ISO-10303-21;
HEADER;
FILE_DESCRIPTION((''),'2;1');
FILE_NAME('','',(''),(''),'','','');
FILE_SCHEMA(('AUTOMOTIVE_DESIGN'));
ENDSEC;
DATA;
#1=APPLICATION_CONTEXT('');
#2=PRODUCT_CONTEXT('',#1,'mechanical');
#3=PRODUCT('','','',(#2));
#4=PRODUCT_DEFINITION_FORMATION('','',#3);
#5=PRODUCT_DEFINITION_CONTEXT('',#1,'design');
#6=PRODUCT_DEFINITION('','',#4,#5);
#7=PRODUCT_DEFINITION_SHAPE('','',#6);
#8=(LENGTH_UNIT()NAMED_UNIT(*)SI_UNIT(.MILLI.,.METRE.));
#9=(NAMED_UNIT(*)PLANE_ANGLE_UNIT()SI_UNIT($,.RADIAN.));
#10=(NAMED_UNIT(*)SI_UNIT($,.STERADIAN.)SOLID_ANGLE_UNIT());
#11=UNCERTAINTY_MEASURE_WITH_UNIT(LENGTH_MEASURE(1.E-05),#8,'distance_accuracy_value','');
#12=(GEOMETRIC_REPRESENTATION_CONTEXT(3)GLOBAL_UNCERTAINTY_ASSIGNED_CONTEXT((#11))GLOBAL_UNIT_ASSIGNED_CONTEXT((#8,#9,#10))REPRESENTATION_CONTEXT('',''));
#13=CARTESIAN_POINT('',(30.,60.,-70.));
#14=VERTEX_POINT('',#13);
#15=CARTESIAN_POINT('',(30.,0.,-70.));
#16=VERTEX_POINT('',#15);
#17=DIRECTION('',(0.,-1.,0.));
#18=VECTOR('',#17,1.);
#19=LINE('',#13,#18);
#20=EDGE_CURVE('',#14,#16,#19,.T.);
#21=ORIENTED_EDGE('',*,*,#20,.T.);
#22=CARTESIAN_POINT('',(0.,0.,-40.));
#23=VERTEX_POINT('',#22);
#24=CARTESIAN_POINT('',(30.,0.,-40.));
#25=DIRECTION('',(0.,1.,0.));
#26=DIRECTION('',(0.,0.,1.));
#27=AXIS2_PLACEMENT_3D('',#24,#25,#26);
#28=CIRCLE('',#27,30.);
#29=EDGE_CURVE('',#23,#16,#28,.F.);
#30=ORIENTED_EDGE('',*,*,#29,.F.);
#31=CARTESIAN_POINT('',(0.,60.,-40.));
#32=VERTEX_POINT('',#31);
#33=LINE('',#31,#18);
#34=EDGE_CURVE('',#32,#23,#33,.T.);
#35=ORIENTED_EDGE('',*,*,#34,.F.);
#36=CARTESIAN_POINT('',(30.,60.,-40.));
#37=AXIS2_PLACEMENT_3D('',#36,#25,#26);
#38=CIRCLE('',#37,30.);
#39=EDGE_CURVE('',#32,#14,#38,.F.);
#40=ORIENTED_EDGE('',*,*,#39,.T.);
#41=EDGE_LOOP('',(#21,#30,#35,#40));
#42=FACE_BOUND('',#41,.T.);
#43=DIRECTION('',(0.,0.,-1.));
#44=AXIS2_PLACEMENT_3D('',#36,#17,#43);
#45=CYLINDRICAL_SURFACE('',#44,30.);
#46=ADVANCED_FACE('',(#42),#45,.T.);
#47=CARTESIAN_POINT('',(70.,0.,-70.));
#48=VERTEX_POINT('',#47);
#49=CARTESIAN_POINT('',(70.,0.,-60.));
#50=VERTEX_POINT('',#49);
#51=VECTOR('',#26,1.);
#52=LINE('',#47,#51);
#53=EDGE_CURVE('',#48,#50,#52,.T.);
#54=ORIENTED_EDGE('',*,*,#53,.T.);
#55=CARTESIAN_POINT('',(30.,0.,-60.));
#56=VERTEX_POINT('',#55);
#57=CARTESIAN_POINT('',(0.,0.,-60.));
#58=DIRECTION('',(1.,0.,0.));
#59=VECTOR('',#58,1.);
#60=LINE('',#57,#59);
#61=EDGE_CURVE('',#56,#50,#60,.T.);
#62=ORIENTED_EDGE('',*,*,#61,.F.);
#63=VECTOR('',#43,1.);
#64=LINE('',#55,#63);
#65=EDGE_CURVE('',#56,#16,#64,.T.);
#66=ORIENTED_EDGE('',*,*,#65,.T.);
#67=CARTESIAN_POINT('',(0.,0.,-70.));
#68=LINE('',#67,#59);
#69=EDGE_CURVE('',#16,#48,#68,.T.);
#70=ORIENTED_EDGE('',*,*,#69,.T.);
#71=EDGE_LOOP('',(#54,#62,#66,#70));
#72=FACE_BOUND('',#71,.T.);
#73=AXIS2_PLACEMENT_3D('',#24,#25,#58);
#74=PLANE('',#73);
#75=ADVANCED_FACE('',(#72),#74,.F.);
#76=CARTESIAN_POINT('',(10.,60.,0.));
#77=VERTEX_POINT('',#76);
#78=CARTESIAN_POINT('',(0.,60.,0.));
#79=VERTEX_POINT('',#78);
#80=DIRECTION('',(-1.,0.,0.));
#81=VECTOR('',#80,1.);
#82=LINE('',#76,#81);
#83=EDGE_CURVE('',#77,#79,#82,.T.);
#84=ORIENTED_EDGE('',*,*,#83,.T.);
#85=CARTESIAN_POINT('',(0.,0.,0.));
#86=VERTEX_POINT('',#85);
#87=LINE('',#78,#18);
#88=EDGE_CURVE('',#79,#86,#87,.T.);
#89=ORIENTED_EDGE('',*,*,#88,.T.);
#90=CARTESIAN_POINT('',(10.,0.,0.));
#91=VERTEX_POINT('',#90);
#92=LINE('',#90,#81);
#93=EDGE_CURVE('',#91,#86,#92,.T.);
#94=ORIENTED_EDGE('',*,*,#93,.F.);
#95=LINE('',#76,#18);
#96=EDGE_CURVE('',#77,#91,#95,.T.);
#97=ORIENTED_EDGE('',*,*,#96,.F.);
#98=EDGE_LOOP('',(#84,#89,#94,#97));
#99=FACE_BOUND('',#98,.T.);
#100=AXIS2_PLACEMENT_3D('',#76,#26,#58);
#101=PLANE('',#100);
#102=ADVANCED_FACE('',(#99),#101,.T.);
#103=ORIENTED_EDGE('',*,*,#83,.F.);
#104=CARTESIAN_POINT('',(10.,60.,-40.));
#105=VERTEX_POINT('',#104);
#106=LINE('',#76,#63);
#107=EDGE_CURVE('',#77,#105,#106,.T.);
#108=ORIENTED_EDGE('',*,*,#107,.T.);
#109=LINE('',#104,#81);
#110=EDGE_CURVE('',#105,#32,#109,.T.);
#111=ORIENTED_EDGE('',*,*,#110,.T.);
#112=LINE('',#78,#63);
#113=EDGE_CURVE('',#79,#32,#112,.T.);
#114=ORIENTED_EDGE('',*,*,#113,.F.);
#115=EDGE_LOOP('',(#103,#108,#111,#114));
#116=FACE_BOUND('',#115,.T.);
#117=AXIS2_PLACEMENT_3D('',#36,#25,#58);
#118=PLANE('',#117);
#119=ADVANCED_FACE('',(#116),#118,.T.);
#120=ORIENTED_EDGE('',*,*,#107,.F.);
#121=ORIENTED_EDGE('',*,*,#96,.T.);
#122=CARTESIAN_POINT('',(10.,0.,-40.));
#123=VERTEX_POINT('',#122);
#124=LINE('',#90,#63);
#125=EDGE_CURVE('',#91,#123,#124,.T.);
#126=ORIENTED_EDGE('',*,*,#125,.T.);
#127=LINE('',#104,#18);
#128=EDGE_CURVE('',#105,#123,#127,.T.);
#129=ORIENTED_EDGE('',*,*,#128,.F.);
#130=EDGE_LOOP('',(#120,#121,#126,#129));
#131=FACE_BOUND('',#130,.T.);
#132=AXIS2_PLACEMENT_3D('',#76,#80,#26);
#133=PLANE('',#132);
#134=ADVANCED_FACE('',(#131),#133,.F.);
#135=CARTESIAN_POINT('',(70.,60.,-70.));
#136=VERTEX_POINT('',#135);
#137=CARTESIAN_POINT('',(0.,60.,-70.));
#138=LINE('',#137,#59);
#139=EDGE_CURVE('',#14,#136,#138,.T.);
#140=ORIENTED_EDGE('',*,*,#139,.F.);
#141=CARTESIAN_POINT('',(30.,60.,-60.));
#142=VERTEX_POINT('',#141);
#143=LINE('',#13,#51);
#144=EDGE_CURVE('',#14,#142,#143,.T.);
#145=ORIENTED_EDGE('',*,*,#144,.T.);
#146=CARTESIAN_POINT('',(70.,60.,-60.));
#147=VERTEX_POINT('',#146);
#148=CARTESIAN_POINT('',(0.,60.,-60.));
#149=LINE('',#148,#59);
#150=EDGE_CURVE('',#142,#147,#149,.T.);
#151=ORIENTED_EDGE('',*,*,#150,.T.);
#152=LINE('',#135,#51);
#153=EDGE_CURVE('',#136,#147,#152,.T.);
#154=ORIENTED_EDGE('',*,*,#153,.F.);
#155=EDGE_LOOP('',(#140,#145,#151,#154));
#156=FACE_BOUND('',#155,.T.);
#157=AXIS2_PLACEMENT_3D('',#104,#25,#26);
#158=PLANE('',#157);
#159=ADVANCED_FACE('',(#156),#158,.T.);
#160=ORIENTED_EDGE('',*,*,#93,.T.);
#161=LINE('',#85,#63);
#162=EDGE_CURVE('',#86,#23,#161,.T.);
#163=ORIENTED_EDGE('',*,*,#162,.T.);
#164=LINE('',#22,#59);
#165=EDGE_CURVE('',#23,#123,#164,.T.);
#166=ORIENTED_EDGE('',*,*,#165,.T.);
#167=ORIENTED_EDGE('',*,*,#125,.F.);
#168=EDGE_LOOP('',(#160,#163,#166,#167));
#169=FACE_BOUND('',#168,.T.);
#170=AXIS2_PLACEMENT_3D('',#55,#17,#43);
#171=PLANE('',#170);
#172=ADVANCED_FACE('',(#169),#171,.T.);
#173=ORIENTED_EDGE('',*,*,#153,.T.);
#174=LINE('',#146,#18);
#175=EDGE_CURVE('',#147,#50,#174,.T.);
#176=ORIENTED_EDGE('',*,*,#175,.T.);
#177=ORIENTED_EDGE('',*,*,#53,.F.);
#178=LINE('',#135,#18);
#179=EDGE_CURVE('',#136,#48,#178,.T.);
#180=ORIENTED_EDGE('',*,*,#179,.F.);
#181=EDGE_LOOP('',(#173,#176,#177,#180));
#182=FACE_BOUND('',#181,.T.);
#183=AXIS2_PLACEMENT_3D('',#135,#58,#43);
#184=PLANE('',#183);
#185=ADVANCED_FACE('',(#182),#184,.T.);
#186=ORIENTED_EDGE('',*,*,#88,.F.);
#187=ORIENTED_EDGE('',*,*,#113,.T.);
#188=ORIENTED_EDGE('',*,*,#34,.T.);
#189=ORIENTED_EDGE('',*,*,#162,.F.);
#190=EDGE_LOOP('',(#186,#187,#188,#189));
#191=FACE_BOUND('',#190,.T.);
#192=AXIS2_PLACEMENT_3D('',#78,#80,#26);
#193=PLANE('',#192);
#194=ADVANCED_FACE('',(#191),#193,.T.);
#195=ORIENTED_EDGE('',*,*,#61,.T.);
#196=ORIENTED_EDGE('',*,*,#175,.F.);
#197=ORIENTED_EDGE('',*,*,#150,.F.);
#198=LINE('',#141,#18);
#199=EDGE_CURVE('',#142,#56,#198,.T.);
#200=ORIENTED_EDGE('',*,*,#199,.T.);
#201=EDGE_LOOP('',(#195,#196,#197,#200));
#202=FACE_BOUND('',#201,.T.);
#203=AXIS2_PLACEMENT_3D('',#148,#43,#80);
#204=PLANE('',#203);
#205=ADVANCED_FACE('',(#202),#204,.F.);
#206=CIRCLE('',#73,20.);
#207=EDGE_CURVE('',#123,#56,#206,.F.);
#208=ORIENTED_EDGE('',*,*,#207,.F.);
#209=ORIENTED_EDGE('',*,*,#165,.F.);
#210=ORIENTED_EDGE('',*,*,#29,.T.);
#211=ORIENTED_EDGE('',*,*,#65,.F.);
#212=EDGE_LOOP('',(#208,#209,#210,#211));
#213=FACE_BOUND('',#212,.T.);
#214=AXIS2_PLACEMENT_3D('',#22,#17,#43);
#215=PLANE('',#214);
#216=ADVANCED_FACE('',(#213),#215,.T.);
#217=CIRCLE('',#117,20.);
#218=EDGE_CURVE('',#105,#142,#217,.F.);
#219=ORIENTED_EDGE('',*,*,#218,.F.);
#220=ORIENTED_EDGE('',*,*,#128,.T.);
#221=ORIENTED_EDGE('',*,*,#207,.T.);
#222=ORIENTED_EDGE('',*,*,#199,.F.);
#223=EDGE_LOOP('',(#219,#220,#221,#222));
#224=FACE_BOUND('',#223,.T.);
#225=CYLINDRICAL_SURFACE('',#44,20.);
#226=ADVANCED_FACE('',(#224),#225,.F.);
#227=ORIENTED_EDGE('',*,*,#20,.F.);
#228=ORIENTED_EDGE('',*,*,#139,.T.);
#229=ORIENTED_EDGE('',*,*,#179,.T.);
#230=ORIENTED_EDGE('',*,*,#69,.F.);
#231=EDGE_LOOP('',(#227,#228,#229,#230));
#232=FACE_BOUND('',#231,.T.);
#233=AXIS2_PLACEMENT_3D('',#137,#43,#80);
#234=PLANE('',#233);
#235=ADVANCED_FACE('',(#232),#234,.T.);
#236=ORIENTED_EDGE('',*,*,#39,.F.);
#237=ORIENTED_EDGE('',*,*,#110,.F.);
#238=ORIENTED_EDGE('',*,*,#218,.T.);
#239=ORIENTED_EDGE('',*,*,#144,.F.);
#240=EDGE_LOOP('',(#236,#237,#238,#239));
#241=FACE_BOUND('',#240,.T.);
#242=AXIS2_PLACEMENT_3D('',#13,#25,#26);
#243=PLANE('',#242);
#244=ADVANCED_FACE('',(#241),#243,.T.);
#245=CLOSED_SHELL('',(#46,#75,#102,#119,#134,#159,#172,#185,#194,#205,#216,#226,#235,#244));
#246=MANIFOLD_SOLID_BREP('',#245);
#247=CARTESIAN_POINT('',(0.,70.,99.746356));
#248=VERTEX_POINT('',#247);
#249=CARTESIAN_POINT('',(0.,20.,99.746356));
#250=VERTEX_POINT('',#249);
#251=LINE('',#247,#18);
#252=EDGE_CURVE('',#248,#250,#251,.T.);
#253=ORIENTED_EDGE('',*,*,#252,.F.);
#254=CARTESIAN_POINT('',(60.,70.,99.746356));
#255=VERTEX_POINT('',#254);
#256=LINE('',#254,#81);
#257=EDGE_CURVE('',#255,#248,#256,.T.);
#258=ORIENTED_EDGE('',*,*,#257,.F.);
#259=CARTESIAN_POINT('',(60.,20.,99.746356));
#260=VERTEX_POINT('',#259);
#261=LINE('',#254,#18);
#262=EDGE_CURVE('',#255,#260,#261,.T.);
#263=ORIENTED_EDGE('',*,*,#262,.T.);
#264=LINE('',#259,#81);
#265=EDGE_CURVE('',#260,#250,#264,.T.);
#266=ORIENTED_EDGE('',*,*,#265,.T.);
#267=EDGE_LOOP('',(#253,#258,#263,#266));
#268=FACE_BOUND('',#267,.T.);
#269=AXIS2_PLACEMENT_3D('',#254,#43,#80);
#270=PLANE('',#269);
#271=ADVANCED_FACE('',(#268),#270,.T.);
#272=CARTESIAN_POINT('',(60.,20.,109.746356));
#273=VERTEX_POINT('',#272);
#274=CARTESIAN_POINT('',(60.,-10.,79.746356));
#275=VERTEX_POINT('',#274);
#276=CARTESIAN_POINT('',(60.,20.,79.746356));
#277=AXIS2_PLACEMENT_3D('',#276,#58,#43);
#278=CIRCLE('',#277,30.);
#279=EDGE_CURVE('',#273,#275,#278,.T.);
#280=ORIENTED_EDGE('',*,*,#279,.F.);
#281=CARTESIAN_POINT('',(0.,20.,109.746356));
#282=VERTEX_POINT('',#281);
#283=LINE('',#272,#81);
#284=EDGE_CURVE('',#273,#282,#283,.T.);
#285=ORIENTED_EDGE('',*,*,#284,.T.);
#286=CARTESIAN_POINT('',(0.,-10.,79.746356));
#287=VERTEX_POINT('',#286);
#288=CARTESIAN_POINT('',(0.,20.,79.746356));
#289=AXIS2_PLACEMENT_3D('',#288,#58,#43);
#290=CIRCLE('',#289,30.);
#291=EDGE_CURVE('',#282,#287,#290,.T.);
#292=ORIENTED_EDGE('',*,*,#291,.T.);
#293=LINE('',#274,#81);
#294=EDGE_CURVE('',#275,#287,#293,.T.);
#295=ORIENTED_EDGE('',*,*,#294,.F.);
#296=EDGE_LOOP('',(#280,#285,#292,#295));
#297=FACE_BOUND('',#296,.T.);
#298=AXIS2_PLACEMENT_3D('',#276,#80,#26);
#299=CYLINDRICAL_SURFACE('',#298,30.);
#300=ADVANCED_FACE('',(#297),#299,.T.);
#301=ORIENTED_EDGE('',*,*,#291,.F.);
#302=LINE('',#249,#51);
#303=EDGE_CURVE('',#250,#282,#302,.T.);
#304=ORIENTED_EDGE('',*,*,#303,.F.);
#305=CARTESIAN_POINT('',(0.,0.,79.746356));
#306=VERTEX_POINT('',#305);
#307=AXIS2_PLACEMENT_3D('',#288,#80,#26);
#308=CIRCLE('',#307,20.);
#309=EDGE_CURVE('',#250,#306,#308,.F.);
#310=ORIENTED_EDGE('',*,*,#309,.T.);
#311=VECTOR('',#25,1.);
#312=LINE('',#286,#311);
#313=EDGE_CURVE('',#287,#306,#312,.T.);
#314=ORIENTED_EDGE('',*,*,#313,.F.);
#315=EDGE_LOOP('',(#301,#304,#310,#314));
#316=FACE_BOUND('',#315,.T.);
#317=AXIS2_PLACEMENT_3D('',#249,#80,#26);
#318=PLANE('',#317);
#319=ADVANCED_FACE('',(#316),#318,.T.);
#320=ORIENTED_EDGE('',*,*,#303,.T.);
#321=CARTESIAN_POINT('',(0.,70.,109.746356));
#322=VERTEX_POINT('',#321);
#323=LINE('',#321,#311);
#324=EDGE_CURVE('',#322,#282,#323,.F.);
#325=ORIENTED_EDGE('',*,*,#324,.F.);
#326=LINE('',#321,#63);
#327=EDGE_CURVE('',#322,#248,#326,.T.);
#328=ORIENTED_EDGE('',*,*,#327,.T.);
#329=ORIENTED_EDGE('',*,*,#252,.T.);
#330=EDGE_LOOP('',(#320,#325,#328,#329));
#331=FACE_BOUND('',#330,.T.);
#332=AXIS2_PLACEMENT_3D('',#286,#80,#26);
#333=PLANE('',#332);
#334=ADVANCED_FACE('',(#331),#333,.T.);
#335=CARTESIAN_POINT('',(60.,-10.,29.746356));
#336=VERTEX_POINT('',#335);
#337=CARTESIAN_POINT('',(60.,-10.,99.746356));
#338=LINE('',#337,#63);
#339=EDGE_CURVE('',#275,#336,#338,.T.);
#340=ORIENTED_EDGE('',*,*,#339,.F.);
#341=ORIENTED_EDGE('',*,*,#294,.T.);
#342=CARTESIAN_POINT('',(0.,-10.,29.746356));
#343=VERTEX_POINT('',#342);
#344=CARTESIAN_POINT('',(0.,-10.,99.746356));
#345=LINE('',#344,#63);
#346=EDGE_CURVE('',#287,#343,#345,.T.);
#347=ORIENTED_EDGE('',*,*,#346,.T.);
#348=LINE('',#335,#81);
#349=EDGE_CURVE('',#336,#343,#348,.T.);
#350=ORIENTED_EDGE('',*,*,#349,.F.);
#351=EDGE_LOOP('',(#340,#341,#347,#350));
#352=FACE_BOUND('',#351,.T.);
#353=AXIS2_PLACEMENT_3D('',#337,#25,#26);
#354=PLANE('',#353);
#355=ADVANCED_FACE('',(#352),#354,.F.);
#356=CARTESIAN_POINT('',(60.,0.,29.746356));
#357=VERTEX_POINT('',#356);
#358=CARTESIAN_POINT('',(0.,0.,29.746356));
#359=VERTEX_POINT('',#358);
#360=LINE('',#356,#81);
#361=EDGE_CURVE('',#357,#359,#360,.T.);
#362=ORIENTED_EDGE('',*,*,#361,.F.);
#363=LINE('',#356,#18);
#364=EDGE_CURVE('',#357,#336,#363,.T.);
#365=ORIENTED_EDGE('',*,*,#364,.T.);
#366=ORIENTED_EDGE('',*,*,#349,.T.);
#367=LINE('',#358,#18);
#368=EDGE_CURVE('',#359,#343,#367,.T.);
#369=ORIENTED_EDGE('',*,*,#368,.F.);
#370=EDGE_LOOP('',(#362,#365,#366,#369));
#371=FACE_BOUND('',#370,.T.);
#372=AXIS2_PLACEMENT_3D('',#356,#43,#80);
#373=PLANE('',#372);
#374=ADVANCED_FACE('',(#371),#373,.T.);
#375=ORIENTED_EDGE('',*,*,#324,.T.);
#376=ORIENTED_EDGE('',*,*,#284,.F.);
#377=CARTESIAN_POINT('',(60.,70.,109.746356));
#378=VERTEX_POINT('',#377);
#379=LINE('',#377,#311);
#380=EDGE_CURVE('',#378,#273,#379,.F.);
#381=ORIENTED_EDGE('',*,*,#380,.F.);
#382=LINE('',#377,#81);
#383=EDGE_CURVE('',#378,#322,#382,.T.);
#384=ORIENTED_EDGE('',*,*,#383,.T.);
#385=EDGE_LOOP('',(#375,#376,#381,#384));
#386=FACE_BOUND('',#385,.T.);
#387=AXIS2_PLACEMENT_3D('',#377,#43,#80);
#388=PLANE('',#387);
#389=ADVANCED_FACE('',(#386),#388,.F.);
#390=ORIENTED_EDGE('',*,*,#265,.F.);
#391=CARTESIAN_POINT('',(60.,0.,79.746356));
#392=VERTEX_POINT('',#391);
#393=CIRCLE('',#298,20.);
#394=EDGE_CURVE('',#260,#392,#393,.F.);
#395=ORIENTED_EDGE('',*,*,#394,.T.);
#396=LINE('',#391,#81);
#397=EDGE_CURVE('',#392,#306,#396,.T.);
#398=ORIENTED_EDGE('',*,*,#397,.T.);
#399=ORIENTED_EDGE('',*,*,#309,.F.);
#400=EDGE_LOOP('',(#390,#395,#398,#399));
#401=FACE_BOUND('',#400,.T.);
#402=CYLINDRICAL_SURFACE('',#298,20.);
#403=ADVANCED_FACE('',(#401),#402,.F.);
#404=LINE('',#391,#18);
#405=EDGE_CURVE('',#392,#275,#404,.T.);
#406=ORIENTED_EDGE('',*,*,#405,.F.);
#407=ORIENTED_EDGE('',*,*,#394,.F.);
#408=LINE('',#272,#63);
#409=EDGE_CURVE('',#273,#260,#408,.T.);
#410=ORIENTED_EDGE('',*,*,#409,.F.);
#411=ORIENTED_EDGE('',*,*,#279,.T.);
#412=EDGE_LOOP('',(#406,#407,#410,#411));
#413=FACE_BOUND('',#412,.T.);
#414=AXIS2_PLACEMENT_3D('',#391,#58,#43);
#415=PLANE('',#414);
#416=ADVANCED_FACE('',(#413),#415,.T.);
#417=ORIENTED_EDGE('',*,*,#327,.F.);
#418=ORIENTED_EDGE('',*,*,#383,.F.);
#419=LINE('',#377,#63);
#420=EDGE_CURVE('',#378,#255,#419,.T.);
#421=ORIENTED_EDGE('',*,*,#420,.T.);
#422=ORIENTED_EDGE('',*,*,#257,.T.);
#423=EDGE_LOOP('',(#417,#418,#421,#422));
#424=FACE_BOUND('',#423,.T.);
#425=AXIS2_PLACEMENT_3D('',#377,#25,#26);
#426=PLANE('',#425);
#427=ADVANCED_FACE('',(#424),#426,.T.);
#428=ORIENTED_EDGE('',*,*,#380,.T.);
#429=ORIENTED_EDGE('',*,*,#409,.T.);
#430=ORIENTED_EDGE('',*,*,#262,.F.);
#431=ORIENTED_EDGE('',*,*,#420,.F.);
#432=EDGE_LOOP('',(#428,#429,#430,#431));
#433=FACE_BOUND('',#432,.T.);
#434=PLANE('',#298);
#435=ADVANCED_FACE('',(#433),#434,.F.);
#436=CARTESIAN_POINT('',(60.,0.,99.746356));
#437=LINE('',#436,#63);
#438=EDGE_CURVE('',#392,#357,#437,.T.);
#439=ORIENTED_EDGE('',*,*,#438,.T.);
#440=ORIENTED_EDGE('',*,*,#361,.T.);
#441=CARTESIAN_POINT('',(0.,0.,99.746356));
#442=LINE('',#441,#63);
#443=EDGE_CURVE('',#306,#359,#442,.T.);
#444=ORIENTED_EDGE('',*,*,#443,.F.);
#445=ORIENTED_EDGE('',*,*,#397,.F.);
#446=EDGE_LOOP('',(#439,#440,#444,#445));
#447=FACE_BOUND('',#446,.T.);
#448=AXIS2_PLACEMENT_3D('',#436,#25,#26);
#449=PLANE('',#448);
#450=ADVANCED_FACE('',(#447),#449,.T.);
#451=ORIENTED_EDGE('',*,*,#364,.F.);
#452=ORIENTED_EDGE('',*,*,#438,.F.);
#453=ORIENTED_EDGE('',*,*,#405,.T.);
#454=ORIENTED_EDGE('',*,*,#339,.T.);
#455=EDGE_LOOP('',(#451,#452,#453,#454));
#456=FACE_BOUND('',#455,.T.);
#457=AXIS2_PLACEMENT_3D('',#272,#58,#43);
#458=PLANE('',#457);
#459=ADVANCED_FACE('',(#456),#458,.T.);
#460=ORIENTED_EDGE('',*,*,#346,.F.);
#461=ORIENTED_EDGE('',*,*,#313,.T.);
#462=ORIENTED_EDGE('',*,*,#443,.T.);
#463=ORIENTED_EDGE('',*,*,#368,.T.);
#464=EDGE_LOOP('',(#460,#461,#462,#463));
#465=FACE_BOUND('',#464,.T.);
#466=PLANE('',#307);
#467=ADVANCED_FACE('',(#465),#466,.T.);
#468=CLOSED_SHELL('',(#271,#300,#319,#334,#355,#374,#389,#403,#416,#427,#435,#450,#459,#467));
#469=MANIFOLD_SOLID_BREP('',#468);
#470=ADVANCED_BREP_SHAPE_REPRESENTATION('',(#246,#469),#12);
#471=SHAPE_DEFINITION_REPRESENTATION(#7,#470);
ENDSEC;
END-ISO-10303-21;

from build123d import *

# Parameters (mm, degrees)
BASE_FLANGE1_DEPTH = 60
BASE_FLANGE2_DEPTH = 60


# Sheet-metal steps are written as plain solids
with BuildPart() as part:
    # Sketch2 → Base-Flange1 (new body)
    with BuildSketch(Plane(origin=(0, 0, 0), x_dir=(1, 0, 0), z_dir=(0, 1, 0))):
        with BuildLine():
            Line((0, 0), (0, 40))
            ThreePointArc((0, 40), (8.786796564, 61.213203436), (30, 70))
            Line((30, 70), (70, 70))
            Line((70, 70), (70, 60))
            Line((70, 60), (30, 60))
            ThreePointArc((30, 60), (15.857864376, 54.142135624), (10, 40))
            Line((10, 40), (10, 0))
            Line((10, 0), (0, 0))
        make_face()
    extrude(amount=BASE_FLANGE1_DEPTH)


with BuildPart() as body_2:
    # Sketch7 → Base-Flange2 (new body)
    with BuildSketch(Plane(origin=(0, 0, 0), x_dir=(0, 0, -1), z_dir=(1, 0, 0))):
        with BuildLine():
            Line((-99.746355884, 70), (-99.746355884, 20))
            ThreePointArc((-99.746355884, 20), (-93.888491507, 5.857864376), (-79.746355884, 0))
            Line((-79.746355884, 0), (-29.746355884, 0))
            Line((-29.746355884, 0), (-29.746355884, -10))
            Line((-29.746355884, -10), (-79.746355884, -10))
            ThreePointArc((-79.746355884, -10), (-100.959559319, -1.213203436), (-109.746355884, 20))
            Line((-109.746355884, 20), (-109.746355884, 70))
            Line((-109.746355884, 70), (-99.746355884, 70))
        make_face()
    extrude(amount=BASE_FLANGE2_DEPTH)


solid = Compound([part.part, body_2.part])
